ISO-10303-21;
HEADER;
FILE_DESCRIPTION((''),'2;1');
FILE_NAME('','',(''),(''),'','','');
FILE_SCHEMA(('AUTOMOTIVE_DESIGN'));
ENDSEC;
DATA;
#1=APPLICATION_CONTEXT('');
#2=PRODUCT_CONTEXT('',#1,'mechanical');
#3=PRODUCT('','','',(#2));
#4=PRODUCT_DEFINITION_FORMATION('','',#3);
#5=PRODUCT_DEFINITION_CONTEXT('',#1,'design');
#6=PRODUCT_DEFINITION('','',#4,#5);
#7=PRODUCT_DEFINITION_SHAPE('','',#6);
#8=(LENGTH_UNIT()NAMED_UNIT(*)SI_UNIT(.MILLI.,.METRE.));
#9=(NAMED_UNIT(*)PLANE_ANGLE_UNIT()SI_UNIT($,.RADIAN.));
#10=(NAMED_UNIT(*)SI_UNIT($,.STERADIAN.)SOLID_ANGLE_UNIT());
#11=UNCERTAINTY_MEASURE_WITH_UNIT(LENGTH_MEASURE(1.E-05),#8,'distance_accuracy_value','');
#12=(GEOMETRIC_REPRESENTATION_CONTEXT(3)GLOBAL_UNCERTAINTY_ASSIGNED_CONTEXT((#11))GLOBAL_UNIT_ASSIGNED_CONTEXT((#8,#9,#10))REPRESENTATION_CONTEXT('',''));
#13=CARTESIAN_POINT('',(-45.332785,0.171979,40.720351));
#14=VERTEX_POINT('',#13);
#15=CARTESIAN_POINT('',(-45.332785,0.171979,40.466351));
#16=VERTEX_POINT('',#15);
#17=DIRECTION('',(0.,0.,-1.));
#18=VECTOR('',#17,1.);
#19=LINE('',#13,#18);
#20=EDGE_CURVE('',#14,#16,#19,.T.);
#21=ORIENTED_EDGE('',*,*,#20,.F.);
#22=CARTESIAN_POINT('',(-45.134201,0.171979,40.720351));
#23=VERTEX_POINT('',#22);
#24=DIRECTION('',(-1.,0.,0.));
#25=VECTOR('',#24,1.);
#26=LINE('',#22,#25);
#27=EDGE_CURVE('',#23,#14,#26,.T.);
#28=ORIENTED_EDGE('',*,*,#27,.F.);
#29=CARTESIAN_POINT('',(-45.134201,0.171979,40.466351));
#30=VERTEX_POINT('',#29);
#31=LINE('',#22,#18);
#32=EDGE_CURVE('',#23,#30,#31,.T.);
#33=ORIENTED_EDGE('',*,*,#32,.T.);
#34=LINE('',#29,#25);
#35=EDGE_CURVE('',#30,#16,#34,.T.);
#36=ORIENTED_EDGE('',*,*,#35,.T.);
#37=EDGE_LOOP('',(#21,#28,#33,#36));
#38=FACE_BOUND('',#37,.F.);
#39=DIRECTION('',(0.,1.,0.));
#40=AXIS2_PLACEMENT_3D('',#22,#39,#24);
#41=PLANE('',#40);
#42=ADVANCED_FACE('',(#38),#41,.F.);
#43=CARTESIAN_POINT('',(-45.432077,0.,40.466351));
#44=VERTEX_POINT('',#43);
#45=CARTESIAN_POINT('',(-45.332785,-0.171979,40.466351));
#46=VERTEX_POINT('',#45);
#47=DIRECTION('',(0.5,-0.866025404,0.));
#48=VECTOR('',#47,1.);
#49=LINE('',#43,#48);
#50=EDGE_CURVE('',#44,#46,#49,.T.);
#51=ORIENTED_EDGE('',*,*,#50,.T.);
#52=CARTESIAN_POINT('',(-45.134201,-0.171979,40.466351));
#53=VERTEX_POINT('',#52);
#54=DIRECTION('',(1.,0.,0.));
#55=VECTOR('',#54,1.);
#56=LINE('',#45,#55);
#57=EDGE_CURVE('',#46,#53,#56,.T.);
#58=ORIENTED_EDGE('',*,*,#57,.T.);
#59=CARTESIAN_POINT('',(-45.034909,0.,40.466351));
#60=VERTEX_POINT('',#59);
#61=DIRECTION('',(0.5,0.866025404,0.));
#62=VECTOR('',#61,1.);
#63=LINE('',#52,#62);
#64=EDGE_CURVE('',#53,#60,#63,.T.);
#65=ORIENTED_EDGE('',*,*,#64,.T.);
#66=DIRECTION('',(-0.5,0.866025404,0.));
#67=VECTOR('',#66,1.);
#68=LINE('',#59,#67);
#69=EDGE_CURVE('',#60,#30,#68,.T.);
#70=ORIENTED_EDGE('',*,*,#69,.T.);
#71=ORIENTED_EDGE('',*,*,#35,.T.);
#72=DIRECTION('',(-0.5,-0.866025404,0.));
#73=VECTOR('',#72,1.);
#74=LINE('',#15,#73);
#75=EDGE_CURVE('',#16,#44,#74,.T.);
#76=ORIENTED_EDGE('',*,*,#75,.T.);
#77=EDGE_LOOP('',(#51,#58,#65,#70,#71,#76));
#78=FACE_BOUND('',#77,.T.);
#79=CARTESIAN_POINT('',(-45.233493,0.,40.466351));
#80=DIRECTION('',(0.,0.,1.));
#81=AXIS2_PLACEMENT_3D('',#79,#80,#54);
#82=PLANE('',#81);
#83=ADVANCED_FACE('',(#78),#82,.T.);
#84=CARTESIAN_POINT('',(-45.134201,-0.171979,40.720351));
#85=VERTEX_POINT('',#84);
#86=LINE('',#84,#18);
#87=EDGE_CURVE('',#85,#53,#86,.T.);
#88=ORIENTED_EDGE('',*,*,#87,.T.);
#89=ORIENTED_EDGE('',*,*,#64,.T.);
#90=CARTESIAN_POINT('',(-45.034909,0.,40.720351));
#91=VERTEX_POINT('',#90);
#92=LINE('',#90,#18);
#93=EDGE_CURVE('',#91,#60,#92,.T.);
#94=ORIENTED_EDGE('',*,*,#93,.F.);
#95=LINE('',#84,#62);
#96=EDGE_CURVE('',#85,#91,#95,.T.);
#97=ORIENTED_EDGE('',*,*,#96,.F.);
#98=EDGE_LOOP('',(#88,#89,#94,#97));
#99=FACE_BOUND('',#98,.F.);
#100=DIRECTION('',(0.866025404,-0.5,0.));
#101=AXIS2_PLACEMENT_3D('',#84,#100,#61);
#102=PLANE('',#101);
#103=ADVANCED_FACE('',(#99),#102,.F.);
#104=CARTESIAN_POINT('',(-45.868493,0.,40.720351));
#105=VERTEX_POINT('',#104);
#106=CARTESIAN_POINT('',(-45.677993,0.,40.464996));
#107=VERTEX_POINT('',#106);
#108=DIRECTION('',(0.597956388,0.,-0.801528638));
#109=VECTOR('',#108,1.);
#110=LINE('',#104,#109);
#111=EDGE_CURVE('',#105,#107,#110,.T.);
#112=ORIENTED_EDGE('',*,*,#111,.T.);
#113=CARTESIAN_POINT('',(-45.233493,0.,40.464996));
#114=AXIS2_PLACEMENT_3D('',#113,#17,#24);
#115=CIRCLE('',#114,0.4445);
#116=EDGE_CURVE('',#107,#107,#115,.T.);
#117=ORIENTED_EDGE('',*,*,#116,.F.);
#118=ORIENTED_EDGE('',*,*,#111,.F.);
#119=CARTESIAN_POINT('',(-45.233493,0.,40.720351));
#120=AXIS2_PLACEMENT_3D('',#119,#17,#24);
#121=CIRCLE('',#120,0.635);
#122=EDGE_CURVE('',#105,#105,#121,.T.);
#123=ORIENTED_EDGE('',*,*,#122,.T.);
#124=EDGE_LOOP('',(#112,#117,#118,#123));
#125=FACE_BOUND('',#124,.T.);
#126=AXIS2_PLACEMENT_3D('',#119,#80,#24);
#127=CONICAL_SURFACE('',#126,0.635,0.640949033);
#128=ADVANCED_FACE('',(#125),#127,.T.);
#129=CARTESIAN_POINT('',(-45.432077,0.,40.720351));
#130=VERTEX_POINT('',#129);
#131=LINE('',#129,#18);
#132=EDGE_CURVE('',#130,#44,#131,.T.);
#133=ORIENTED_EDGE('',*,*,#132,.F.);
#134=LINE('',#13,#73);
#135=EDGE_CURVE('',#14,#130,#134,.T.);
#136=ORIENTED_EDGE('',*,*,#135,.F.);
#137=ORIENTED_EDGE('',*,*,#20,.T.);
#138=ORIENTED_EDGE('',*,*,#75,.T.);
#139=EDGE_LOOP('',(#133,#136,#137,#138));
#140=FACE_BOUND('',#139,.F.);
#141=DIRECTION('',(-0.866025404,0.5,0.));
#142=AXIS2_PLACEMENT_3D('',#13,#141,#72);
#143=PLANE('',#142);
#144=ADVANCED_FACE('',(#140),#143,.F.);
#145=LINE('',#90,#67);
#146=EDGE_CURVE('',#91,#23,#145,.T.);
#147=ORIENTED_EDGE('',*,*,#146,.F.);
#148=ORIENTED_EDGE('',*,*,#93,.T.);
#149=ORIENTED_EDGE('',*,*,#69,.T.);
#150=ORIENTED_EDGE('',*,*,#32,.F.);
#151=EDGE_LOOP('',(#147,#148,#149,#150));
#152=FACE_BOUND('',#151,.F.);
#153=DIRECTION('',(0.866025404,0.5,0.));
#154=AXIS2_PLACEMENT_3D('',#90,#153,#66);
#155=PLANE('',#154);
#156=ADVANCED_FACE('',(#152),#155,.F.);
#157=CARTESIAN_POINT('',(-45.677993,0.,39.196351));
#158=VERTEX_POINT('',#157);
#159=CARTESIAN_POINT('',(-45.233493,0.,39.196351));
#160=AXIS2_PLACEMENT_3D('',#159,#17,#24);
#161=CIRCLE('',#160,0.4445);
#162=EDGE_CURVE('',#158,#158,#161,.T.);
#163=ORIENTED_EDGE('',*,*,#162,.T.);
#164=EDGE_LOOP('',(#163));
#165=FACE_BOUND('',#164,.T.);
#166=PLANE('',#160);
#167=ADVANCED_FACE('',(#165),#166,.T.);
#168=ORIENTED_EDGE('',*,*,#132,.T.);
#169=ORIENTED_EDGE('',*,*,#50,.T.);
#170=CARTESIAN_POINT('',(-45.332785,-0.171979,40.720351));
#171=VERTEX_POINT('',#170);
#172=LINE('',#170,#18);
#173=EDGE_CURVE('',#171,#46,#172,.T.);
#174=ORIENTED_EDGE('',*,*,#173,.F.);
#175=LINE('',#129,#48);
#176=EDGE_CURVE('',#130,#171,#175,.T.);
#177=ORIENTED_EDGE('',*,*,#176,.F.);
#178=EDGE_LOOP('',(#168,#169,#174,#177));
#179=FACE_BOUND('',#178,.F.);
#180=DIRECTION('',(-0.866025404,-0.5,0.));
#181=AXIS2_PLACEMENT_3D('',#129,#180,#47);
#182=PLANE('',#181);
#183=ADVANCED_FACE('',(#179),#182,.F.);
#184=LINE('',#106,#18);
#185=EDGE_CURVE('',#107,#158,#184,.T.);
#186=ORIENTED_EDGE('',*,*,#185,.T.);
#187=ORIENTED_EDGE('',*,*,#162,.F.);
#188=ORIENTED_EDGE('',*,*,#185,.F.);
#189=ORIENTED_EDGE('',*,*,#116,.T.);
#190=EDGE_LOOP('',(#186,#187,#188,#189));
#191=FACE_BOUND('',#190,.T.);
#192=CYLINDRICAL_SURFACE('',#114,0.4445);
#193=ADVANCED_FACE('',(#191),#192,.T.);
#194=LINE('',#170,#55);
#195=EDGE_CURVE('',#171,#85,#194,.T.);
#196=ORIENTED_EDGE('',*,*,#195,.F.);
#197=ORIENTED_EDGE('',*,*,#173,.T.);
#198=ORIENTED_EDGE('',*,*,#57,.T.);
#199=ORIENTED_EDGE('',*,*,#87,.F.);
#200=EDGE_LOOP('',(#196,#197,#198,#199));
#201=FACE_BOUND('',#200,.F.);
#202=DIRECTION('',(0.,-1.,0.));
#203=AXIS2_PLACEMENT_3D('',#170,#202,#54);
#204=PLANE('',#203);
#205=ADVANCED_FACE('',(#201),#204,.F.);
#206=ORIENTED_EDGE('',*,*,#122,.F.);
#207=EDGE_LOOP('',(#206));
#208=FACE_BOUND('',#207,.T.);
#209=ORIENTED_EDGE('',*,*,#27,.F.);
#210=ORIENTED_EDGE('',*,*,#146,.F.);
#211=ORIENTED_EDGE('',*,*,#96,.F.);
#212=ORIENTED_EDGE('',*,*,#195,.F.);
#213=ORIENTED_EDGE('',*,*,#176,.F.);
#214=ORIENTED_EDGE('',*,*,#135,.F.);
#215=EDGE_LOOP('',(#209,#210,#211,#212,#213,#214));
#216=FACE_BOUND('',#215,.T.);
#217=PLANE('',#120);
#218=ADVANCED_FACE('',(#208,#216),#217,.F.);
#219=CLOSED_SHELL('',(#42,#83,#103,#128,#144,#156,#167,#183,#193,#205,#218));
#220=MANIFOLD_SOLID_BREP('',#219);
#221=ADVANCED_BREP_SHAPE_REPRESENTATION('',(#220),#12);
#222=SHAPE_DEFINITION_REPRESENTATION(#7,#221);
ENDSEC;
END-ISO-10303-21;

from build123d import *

# Parameters (mm, degrees)
F3_DEPTH = 0.254


# Not quite as in the source:
# - a feature names something its author has since deleted; it is built from what else it names


with BuildPart() as f1:
    # F0 (on Front) → F1 (revolve)
    with BuildSketch(Plane.XZ):
        Polygon((-45.2334927974, 40.7203510404), (-45.8684927974, 40.7203510404), (-45.6779927974, 40.4649959532), (-45.6779927974, 39.1963510404), (-45.2334927974, 39.1963510404), align=None)
    revolve(axis=Axis((-45.2334927974, 0, 39.9583510404), (0, 0, -1)))

    # F2 (on face) → F3 (cut)
    with BuildSketch(Plane.XY.offset(40.7203510404)):
        Polygon((-45.1342007585, 0.1719788561), (-45.3327848362, 0.1719788561), (-45.4320768751, 0), (-45.3327848362, -0.1719788561), (-45.1342007585, -0.1719788561), (-45.0349087197, 0), align=None)
    extrude(amount=-F3_DEPTH, mode=Mode.SUBTRACT)


solid = f1.part
